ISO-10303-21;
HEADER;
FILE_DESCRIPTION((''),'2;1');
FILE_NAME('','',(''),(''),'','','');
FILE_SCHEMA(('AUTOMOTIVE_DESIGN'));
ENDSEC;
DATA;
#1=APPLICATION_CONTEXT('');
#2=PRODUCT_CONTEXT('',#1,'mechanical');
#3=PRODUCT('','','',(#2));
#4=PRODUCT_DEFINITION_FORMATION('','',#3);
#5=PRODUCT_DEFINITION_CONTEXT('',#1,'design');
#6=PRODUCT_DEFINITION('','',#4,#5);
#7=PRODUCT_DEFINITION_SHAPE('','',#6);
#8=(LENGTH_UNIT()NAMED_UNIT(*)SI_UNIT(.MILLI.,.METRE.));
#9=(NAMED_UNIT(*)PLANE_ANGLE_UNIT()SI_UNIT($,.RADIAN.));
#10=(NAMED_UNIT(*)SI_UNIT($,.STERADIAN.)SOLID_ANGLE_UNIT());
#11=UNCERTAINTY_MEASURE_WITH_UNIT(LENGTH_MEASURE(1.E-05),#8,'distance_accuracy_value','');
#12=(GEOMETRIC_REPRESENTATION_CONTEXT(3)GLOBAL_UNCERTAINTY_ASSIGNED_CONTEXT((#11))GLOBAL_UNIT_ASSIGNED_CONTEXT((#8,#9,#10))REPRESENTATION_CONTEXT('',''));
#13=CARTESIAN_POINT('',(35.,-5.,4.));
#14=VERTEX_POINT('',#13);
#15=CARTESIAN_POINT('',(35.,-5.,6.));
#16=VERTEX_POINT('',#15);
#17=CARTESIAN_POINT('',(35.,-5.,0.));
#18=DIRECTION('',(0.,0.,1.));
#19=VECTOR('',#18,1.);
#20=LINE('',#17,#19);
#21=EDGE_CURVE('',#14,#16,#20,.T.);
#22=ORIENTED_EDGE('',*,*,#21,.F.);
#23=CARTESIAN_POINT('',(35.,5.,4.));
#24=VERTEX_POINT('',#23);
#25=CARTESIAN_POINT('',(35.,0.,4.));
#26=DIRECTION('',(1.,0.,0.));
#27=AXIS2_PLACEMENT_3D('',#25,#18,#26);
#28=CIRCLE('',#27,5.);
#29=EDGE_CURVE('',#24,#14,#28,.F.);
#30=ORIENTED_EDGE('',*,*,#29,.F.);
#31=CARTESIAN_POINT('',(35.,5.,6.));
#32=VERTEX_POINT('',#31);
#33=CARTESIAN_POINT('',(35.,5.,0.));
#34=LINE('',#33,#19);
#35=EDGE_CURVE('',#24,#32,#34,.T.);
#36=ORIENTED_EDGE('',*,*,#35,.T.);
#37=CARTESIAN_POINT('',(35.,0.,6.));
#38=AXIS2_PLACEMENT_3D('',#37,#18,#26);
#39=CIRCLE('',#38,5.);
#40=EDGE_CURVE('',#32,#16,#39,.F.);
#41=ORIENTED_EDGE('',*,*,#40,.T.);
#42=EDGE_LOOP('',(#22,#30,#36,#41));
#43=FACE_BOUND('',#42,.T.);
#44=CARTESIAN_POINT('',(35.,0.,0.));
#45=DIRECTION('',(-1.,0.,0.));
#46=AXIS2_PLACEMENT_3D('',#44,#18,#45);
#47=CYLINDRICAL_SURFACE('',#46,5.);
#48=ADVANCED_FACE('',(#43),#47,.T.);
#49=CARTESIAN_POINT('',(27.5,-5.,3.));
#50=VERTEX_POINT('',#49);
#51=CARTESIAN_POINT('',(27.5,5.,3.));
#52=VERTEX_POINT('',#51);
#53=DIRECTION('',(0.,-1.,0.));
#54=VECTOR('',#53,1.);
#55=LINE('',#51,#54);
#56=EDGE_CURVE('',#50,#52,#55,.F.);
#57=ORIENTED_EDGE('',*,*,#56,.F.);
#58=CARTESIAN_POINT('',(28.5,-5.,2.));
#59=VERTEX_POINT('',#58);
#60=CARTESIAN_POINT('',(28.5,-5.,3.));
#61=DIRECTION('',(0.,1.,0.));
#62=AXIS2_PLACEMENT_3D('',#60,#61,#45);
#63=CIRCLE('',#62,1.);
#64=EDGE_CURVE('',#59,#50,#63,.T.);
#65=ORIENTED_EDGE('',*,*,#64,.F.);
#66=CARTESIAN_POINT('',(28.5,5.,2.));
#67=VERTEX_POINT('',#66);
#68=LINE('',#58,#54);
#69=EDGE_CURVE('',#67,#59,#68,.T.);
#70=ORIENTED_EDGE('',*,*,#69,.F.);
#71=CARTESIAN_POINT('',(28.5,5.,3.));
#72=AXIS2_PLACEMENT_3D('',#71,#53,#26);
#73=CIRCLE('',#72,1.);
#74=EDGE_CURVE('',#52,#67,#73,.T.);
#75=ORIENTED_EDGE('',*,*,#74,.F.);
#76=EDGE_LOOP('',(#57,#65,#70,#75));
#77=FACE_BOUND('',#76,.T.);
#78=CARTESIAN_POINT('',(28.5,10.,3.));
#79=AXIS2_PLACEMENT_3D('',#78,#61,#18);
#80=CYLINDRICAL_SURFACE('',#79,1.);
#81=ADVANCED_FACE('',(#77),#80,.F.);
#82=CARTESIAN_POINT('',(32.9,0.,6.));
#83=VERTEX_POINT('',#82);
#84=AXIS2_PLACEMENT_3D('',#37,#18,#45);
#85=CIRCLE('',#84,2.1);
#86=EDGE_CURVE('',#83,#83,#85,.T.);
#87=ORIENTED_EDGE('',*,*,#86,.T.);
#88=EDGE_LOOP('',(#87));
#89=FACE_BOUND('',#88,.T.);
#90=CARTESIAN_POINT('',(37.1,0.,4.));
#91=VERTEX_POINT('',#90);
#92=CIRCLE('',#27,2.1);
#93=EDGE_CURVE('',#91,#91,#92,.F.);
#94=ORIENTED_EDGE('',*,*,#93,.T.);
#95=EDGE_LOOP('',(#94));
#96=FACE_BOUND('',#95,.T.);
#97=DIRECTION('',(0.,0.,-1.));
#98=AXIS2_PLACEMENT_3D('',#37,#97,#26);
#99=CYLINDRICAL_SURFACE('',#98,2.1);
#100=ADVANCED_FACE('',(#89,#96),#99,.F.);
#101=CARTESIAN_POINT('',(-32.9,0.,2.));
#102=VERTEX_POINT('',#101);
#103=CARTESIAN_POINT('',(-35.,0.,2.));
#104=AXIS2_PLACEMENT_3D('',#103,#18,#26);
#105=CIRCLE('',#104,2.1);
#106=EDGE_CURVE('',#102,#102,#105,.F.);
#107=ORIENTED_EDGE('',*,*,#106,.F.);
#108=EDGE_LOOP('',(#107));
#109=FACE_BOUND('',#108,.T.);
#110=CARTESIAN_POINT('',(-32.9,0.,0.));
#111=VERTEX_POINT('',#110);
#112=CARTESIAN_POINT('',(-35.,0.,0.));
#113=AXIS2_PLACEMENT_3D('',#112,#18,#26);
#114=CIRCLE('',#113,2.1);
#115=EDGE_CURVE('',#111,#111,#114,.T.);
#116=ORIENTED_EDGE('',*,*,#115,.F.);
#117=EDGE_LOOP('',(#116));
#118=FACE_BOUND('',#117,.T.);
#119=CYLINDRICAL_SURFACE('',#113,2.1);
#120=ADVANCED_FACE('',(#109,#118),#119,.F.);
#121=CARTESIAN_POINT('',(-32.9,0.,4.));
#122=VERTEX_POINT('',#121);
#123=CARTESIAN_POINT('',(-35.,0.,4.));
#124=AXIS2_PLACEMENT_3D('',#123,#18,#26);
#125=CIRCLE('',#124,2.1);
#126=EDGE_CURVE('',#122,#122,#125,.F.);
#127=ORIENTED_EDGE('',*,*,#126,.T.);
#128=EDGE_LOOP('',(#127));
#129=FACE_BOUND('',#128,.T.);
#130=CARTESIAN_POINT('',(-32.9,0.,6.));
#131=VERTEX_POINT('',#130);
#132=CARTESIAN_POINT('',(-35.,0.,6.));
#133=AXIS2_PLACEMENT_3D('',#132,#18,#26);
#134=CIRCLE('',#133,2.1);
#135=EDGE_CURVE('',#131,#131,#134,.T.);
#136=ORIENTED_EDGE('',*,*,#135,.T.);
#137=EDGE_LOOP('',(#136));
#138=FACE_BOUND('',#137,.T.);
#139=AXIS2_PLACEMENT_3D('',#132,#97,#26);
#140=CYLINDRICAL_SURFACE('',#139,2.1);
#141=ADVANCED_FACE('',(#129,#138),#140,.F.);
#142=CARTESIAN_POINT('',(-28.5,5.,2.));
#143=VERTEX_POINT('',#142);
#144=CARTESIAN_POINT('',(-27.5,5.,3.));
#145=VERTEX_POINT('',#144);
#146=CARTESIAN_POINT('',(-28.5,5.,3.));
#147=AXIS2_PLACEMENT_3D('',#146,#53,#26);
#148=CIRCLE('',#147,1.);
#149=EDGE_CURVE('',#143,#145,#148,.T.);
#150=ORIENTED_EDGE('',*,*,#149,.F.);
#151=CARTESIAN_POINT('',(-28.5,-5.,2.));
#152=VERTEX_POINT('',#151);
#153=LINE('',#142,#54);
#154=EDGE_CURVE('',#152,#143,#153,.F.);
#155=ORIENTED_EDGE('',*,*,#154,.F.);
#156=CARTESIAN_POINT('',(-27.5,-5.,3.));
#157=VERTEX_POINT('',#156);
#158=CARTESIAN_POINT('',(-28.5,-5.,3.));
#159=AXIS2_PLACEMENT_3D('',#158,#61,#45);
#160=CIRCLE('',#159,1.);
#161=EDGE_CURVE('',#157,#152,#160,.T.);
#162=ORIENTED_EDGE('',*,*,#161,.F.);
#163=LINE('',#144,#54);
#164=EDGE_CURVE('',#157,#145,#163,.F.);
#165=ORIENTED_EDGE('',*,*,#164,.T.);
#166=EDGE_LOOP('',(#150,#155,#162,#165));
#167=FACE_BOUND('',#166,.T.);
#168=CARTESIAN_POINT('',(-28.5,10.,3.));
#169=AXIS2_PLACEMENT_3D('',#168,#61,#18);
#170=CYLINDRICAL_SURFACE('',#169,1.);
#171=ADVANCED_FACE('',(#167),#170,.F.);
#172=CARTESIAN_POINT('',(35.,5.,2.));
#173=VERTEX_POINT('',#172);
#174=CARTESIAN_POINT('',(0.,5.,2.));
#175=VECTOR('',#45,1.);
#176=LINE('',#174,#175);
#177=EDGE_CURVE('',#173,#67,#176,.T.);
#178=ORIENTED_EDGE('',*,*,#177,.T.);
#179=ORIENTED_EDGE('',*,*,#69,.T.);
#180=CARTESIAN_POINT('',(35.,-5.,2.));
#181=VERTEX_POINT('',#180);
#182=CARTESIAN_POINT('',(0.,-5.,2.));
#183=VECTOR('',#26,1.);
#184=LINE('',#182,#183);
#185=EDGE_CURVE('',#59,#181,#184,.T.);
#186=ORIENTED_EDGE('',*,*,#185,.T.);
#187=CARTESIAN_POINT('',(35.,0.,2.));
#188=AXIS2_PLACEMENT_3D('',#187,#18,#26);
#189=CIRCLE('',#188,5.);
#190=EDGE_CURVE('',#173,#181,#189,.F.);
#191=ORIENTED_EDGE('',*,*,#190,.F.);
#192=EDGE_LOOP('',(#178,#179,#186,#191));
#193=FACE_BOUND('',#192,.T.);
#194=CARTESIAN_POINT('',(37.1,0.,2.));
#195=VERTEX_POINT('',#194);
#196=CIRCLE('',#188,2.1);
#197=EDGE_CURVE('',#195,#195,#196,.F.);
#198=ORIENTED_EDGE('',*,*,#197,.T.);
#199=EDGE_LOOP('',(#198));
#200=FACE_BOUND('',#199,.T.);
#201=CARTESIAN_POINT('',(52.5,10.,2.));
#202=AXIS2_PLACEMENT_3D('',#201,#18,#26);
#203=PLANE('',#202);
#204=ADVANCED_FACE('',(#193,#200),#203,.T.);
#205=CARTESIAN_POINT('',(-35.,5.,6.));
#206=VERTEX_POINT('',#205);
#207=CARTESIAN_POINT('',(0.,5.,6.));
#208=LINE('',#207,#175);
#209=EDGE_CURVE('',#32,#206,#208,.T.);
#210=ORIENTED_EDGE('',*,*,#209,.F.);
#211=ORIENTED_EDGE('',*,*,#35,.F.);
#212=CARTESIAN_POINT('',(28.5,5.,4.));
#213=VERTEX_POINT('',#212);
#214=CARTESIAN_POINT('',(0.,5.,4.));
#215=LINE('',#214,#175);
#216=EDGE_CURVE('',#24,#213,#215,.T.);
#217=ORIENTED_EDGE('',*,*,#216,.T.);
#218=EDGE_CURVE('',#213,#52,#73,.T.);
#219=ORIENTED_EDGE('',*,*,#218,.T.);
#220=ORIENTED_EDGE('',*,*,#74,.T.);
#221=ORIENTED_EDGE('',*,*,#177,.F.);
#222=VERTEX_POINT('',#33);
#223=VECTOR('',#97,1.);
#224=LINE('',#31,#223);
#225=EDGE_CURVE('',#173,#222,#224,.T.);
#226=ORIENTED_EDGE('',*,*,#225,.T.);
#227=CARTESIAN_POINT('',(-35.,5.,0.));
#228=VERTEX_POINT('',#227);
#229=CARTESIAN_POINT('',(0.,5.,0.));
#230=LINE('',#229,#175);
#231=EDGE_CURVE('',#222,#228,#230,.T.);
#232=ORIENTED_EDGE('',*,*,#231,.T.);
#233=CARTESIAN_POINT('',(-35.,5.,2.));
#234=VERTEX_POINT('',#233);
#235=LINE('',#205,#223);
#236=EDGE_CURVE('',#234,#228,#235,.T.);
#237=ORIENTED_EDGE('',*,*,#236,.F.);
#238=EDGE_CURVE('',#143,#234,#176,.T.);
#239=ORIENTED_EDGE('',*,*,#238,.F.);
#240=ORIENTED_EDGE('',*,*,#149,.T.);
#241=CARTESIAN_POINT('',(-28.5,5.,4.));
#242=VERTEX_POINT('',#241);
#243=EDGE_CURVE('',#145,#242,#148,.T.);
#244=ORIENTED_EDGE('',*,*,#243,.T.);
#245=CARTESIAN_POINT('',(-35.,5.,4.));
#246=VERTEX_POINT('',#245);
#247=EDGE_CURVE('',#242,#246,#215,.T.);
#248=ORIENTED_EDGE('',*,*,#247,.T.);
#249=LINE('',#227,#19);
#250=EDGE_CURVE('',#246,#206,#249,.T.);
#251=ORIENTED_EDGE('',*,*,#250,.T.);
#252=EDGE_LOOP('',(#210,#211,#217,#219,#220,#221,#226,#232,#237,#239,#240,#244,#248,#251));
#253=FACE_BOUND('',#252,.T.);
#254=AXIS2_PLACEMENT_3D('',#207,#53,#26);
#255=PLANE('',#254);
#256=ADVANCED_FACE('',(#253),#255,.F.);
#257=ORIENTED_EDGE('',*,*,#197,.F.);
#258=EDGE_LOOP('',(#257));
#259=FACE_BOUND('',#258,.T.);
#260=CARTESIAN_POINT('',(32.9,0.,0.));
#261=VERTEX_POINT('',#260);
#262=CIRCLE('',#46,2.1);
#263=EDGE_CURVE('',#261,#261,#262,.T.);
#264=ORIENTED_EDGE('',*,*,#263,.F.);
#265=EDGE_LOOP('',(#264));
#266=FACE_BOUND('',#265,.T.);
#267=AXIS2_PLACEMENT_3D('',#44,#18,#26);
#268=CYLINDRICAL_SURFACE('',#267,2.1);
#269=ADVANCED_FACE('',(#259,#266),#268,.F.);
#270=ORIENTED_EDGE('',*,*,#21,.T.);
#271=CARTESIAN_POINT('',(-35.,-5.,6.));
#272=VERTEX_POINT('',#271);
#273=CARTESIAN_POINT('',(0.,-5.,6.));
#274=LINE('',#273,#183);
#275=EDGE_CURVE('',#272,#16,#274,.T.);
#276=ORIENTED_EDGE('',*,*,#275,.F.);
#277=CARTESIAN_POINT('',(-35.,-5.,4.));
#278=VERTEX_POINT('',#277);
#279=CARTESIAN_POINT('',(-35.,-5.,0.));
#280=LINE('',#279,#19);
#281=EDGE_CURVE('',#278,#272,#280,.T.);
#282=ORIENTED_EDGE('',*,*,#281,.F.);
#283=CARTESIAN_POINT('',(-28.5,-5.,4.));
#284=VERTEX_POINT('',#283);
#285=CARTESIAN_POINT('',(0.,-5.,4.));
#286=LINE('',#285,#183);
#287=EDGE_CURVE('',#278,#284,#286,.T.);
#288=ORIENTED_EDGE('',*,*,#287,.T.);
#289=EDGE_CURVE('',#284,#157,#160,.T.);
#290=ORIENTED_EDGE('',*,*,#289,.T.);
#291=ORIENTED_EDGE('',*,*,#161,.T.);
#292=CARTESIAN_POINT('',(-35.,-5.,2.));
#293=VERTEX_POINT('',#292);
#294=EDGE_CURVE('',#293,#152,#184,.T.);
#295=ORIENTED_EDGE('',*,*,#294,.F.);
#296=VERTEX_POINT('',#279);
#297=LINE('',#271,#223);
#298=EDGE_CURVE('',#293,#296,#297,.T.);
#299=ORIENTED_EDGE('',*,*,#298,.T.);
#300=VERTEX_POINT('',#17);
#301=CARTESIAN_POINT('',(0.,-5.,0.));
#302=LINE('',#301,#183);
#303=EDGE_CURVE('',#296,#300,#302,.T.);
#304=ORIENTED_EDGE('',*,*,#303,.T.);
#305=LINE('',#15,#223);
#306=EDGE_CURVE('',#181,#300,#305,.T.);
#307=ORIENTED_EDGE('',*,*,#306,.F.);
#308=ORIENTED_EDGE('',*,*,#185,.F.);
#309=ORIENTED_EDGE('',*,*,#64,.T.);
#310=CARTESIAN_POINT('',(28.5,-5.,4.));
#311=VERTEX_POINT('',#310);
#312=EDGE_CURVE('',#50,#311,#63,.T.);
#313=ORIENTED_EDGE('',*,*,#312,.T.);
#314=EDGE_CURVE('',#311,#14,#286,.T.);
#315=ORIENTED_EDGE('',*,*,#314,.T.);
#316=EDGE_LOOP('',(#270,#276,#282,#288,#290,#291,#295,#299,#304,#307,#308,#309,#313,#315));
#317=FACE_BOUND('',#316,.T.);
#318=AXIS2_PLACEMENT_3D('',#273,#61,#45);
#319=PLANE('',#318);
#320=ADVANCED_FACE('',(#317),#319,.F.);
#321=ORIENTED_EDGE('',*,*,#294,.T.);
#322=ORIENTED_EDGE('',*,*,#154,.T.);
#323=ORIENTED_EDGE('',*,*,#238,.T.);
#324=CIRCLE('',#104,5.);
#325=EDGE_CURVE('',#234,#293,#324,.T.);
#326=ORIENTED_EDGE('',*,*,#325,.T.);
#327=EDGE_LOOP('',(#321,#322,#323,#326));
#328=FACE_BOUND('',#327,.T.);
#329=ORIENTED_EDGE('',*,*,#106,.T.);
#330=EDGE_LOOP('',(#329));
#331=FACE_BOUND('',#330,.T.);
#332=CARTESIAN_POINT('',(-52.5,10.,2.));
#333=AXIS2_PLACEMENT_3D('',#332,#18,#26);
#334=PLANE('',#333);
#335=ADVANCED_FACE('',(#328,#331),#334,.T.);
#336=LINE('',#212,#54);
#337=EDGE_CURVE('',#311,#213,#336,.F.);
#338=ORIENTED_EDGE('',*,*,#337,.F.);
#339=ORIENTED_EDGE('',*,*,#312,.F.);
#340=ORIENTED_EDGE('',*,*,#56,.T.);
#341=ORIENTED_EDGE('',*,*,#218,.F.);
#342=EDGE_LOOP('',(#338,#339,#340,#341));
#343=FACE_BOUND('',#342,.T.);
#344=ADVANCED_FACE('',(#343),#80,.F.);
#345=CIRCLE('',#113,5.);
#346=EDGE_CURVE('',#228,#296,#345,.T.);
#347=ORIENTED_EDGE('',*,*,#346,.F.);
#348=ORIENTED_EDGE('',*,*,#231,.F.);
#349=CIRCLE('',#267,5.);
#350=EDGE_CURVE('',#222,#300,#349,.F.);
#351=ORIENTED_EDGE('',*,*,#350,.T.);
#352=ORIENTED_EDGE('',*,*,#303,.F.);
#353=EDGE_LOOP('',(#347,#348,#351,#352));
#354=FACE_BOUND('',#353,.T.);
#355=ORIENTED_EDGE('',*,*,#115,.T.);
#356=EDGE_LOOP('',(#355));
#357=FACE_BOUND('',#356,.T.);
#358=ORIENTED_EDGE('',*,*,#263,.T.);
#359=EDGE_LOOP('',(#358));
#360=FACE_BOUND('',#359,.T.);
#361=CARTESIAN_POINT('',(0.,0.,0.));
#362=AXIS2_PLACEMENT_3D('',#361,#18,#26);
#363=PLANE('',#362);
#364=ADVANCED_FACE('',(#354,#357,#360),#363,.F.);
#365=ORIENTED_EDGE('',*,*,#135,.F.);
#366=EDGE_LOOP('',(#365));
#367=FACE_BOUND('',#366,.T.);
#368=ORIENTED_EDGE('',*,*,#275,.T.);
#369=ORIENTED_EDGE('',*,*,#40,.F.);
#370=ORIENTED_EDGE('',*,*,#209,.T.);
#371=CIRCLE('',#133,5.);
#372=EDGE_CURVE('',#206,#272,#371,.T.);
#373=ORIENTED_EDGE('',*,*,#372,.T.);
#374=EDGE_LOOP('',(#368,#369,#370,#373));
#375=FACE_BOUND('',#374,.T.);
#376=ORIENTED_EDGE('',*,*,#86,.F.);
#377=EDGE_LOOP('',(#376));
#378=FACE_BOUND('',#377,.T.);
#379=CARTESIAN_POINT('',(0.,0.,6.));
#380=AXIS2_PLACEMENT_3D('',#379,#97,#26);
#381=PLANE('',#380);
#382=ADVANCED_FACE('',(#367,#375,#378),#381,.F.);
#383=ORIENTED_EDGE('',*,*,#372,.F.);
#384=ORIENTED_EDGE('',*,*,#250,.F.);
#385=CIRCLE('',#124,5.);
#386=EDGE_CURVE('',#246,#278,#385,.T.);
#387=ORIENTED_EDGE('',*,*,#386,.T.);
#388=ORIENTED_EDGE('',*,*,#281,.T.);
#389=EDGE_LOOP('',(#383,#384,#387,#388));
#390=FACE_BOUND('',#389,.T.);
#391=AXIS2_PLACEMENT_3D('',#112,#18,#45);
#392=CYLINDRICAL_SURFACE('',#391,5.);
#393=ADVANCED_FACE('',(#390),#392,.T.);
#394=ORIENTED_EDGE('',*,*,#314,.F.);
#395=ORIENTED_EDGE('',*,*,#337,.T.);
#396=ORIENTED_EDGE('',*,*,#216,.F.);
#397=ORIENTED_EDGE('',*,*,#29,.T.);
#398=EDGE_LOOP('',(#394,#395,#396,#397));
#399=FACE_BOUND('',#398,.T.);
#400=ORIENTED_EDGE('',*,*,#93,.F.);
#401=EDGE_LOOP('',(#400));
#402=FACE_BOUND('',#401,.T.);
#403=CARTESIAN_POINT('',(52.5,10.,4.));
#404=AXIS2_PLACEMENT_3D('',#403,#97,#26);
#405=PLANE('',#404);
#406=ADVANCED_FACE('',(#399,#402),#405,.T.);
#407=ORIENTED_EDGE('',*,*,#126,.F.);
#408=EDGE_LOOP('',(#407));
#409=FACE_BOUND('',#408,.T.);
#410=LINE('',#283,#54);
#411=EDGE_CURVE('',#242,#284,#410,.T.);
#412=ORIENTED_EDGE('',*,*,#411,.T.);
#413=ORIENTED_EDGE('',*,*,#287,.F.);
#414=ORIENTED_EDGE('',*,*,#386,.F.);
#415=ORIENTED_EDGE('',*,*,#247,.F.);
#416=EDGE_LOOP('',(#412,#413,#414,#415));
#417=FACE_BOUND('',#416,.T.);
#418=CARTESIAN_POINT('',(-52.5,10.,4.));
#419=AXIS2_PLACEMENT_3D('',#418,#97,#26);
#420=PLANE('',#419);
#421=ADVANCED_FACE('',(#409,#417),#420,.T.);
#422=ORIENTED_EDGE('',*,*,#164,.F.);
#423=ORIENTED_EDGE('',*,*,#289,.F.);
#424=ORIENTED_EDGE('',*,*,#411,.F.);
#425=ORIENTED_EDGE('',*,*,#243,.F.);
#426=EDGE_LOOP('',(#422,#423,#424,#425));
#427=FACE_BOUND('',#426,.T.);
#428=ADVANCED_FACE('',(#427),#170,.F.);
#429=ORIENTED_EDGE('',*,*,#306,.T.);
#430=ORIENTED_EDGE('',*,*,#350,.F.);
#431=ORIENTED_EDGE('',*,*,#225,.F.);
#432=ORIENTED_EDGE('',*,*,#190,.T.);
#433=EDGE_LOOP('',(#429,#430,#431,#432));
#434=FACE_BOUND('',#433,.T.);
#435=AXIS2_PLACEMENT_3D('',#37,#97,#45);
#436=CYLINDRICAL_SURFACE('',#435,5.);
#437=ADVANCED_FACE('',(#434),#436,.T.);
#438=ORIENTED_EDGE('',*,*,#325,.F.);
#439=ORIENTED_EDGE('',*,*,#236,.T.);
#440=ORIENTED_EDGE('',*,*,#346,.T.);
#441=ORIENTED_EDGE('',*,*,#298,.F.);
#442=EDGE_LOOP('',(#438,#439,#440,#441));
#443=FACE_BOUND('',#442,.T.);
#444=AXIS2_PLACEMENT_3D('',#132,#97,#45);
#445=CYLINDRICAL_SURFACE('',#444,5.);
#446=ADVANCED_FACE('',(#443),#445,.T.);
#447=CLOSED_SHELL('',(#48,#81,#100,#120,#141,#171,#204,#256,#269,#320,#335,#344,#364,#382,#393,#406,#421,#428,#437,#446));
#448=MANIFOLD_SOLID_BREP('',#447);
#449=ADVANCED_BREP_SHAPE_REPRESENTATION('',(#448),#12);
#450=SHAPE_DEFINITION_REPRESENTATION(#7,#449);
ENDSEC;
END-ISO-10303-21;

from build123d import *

# Parameters (mm, degrees)
BOSS_EXTRUDE1_DEPTH     = 6
SKETCH2_R               = 2.1
CUT_EXTRUDE1_DEPTH      = 41.755367745
CUT_EXTRUDE2_DEPTH      = 10
CUT_EXTRUDE2_DEPTH_BACK = 10
SKETCH3_W               = 25
SKETCH3_H               = 2
FILLET5_R               = 1


with BuildPart() as part:
    # Sketch1 → Boss-Extrude1 (new body)
    with BuildSketch(Plane.XY):
        with BuildLine():
            ThreePointArc((35, -5), (30, 0), (35, 5))
            Line((35, 5), (-35, 5))
            ThreePointArc((-35, 5), (-31.464466094, 3.535533906), (-30, 0))
            ThreePointArc((-30, 0), (-31.464466094, -3.535533906), (-35, -5))
            Line((-35, -5), (35, -5))
        make_face()
        with BuildLine():
            ThreePointArc((-30, 0), (-31.464466094, 3.535533906), (-35, 5))
            ThreePointArc((-35, 5), (-40, 0), (-35, -5))
            ThreePointArc((-35, -5), (-31.464466094, -3.535533906), (-30, 0))
        make_face()
        with BuildLine():
            ThreePointArc((40, 0), (38.535533906, 3.535533906), (35, 5))
            ThreePointArc((35, 5), (30, 0), (35, -5))
            ThreePointArc((35, -5), (38.535533906, -3.535533906), (40, 0))
        make_face()
    extrude(amount=BOSS_EXTRUDE1_DEPTH)

    # Sketch2 → Cut-Extrude1 (cut, through all)
    with BuildSketch(Plane.XY.offset(6)):
        with Locations((-35, 0)):
            Circle(SKETCH2_R)
        with Locations(Location((35, 0, 0), (0, 0, 180))):
            Circle(SKETCH2_R)
    extrude(amount=-CUT_EXTRUDE1_DEPTH, mode=Mode.SUBTRACT)

    # Sketch3 → Cut-Extrude2 (cut, two sides: drawn at the far end of the back side and taken through both)
    with BuildSketch(Plane(origin=(0, 0, 0), x_dir=(1, 0, 0), z_dir=(0, 1, 0)).offset(-CUT_EXTRUDE2_DEPTH_BACK)):
        with Locations((-40, -3)):
            Rectangle(SKETCH3_W, SKETCH3_H)
        with Locations((40, -3)):
            Rectangle(SKETCH3_W, SKETCH3_H)
    extrude(amount=CUT_EXTRUDE2_DEPTH + CUT_EXTRUDE2_DEPTH_BACK, mode=Mode.SUBTRACT)

    # SurfaceCut1
    split(bisect_by=Plane.XY.offset(3), keep=Keep.BOTTOM)

    # Mirror12: part across plane


with BuildPart() as part_1:
    add(part.part)
    add(part.part.mirror(Plane.XY.offset(3)))

    # Fillet5
    fillet5_edges = [part_1.edges().sort_by_distance(p)[0] for p in [
        (-27.5, 0, 2),
        (27.5, 0, 2),
        (27.5, 0, 4),
        (-27.5, 0, 4),
    ]]
    fillet(fillet5_edges, radius=FILLET5_R - 0.0001)  # a hair under: the kernel refuses the full size


solid = part_1.part
